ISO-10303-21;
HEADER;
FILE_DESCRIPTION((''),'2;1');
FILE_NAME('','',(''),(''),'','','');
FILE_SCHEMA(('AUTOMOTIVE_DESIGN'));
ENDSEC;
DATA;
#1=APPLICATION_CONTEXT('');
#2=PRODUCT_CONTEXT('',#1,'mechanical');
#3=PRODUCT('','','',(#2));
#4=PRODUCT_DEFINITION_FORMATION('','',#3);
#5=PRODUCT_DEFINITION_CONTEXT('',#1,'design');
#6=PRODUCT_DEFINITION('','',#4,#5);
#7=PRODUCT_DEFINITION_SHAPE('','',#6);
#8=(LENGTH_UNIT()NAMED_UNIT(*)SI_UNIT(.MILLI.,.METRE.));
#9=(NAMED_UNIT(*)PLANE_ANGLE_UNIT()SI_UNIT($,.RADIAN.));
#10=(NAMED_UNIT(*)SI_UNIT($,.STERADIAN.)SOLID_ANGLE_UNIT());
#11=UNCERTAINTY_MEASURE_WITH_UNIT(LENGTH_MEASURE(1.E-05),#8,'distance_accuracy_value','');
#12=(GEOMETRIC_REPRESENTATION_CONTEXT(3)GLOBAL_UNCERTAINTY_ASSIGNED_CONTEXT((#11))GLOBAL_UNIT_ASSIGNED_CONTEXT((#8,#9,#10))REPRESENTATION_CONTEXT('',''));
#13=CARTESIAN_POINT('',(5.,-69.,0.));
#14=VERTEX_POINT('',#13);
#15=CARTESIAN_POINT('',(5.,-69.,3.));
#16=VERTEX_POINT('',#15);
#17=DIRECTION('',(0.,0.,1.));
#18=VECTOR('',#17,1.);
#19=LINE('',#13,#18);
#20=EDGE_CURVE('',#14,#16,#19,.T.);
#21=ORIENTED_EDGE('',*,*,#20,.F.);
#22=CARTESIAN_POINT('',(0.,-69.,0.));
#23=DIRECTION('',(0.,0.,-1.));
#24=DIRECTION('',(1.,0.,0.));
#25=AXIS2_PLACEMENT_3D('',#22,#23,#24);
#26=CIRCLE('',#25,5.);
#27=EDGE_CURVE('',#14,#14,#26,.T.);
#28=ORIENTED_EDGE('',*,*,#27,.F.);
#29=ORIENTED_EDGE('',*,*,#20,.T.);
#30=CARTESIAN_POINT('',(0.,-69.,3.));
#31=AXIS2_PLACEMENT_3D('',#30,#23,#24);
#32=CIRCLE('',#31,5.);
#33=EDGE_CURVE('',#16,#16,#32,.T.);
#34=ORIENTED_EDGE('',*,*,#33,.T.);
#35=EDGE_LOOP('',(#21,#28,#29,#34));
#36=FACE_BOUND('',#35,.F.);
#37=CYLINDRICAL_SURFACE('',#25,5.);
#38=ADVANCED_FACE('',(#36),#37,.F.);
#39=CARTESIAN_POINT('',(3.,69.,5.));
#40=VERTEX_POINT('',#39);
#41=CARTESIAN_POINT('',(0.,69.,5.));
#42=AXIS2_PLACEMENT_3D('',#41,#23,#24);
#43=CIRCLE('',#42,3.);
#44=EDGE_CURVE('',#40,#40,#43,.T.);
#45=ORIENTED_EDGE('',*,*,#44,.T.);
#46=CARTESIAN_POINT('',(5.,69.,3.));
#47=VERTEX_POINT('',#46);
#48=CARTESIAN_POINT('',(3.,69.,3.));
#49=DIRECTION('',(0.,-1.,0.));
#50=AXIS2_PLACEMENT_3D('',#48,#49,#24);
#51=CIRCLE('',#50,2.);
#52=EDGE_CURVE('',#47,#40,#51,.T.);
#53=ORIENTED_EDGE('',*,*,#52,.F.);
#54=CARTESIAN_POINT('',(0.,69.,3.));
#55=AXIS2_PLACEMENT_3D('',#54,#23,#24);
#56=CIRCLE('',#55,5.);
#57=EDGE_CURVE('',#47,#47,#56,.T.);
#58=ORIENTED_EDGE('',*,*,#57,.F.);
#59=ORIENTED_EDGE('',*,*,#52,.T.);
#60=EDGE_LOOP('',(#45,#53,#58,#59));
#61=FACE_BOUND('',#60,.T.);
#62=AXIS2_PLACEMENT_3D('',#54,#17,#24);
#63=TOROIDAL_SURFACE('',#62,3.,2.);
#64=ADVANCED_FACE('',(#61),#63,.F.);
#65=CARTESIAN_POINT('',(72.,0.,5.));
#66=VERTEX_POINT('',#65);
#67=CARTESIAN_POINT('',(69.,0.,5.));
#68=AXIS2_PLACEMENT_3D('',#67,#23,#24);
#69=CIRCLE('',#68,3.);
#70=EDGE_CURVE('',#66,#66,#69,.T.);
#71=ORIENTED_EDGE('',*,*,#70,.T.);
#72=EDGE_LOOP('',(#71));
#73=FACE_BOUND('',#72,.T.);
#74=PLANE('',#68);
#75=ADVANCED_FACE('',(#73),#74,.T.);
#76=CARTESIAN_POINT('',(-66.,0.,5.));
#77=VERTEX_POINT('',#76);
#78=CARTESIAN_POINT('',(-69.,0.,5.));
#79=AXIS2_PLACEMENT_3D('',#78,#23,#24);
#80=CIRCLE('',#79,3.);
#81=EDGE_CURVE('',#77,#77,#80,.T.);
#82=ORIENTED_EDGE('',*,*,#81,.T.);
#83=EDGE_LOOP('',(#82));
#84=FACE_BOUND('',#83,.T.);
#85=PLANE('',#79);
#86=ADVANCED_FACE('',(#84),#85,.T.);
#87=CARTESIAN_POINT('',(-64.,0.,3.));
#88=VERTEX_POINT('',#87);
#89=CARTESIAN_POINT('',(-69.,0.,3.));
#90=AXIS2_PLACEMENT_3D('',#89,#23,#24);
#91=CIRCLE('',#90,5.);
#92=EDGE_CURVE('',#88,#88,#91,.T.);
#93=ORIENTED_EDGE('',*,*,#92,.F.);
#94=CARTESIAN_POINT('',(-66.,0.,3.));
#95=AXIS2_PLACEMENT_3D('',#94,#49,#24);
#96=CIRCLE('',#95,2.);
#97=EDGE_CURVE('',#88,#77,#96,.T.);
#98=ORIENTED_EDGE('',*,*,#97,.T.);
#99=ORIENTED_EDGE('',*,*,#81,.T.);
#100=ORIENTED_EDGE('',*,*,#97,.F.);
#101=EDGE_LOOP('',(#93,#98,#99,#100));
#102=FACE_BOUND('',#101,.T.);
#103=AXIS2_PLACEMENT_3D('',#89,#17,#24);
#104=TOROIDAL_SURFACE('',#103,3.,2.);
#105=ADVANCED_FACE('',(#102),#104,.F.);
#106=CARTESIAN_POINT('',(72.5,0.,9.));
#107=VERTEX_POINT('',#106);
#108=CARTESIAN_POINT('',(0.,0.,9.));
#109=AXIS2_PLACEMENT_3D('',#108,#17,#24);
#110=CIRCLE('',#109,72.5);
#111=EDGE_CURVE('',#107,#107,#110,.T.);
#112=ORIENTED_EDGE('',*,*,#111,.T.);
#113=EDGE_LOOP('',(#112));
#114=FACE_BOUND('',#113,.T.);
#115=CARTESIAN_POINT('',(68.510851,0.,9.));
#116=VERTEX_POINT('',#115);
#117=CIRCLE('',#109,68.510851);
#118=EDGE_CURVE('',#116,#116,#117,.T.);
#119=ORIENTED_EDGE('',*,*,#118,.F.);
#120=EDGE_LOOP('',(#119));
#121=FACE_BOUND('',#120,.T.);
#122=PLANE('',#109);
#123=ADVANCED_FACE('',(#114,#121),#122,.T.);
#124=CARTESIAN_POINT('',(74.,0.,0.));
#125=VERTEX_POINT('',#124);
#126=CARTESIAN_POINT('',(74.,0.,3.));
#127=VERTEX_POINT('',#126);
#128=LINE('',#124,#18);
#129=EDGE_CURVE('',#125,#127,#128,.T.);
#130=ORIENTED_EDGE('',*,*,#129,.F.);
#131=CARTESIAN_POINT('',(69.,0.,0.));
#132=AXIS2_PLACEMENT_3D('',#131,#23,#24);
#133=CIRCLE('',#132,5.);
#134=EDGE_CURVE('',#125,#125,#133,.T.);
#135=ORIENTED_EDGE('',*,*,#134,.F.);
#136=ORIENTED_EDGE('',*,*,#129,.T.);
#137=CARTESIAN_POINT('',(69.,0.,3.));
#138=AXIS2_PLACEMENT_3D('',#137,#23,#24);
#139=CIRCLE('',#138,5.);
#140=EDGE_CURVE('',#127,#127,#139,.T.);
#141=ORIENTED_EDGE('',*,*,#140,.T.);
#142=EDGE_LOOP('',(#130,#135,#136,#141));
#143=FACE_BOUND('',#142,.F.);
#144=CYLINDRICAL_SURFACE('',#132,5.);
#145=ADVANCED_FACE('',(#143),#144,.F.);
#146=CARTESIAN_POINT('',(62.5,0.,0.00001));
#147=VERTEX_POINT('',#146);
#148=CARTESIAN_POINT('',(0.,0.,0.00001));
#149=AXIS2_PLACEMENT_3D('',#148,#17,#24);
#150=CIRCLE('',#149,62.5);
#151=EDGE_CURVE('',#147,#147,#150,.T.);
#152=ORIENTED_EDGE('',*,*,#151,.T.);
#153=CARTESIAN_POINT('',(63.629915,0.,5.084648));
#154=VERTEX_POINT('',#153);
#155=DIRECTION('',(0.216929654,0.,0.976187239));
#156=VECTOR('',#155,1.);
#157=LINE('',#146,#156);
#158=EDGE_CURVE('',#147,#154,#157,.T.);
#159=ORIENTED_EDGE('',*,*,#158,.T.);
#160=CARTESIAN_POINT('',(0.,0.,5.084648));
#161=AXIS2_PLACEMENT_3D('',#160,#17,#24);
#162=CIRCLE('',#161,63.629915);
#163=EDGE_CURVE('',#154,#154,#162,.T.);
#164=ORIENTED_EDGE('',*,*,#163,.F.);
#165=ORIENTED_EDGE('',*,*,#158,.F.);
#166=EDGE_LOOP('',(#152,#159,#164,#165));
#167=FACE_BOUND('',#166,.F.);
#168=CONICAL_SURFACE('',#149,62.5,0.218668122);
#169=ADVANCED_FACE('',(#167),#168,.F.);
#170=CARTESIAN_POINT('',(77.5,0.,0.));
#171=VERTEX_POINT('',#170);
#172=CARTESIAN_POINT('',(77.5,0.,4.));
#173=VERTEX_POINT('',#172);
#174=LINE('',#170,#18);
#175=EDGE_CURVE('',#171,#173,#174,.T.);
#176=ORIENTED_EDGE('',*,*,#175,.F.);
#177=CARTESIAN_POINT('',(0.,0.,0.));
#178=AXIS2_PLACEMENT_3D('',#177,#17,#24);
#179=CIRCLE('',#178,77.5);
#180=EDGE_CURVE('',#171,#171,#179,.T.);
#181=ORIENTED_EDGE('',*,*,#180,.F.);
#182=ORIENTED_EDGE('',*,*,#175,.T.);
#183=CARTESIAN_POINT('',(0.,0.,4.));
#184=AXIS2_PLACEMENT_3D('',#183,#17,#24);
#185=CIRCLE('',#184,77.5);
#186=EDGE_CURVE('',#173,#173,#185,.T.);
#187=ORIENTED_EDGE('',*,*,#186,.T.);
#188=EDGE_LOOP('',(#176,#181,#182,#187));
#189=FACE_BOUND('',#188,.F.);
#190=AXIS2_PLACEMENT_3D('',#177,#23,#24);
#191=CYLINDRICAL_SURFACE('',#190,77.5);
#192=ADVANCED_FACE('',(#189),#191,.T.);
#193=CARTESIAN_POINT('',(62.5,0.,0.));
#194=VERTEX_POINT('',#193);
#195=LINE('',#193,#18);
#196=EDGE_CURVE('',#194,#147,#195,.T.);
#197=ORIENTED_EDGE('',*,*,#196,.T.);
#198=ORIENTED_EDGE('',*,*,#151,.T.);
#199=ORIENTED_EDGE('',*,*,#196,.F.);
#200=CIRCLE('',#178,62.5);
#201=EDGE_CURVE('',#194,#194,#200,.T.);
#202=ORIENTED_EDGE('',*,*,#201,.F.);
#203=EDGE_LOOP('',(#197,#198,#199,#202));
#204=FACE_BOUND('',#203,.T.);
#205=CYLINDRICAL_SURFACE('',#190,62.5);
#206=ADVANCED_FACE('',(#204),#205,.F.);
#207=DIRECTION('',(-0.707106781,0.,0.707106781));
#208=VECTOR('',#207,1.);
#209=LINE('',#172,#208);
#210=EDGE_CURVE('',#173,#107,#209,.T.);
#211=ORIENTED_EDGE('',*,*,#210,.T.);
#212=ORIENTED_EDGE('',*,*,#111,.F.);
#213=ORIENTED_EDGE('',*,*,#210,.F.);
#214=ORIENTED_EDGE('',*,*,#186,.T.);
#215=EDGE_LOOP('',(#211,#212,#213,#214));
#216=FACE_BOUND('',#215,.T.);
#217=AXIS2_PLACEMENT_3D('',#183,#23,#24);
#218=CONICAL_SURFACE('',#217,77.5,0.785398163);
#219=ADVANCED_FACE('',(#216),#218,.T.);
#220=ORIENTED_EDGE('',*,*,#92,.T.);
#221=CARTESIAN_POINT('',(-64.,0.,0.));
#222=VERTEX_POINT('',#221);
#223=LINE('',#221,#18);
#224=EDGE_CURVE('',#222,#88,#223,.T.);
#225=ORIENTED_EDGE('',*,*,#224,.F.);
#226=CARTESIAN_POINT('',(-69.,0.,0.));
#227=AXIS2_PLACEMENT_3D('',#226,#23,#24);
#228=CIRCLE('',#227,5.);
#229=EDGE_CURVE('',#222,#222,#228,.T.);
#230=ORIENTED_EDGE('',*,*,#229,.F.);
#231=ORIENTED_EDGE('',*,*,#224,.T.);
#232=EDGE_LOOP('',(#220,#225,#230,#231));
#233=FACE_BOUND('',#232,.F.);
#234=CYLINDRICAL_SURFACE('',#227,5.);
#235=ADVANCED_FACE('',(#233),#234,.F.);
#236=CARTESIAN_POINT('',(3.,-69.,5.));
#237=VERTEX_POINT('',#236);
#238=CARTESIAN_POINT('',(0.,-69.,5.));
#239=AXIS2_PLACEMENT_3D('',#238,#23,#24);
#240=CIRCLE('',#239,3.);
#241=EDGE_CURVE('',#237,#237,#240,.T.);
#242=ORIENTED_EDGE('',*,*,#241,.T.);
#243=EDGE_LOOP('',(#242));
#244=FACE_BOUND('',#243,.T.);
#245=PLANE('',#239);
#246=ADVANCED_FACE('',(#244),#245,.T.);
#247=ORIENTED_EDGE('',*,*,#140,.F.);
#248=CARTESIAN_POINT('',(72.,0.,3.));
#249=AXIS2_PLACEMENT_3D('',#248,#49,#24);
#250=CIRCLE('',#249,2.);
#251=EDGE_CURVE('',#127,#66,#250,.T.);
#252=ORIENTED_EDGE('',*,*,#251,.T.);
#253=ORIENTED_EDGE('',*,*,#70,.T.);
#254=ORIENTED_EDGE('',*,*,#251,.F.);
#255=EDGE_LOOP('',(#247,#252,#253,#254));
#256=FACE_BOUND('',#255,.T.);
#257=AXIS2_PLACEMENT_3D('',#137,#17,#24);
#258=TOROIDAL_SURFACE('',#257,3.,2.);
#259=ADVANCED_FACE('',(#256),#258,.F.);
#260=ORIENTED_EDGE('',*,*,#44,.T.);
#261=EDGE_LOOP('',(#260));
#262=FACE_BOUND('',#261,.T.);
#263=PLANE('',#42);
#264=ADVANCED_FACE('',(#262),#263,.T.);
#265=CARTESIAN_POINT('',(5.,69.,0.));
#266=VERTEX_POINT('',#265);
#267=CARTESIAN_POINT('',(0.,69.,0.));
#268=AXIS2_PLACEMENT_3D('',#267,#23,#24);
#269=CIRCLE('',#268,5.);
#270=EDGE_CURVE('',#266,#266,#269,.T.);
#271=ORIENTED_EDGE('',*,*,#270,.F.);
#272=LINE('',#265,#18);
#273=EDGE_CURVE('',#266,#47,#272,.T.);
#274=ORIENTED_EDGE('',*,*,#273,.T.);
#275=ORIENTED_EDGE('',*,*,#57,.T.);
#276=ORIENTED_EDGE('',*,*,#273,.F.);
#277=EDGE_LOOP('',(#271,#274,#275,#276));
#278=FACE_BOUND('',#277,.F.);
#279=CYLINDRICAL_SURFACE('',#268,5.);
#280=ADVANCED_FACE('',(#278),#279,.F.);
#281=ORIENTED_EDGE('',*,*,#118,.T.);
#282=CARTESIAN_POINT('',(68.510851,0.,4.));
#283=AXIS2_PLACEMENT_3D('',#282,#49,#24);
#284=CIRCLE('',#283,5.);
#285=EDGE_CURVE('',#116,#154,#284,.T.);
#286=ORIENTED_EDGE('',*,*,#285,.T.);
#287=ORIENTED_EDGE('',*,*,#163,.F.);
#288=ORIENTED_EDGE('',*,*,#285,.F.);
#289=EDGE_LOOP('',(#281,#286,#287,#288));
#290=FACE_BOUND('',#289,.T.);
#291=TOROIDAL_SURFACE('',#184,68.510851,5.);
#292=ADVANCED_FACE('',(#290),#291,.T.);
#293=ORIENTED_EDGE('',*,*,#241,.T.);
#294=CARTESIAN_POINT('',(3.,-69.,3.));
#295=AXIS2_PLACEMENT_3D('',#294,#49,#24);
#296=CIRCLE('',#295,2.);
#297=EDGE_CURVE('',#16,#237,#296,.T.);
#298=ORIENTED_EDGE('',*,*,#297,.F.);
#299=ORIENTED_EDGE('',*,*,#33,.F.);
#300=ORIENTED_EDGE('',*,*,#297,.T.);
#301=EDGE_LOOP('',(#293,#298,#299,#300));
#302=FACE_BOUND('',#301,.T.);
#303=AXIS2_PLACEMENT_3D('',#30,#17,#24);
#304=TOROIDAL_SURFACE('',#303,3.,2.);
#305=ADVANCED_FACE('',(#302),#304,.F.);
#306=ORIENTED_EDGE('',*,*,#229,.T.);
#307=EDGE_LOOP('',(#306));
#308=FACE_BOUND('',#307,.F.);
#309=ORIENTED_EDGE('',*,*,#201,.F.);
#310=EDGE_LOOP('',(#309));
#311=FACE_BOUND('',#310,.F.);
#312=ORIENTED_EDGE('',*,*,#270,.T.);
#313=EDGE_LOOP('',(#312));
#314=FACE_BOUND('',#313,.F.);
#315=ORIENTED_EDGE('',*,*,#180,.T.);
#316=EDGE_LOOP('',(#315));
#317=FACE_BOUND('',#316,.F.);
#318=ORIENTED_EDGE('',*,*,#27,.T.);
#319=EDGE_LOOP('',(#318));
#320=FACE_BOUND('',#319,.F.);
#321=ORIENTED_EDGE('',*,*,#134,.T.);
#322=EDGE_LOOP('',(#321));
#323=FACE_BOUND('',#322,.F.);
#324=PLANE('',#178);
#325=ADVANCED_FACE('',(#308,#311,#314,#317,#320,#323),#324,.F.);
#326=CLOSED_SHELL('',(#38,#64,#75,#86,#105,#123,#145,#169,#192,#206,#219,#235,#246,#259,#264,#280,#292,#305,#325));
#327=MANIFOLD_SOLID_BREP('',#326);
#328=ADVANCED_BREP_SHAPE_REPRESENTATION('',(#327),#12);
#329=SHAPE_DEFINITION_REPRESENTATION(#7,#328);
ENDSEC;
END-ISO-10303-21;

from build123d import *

# Parameters (mm, degrees)
F0_R     = 77.5
F0_R_2   = 62.5
F1_DEPTH = 9
F2_SIZE  = 5
F3_SIZE2 = 1.99999
F3_SIZE  = 8.99999
F4_R     = 5
F5_R     = 5
F6_DEPTH = 5
F7_R     = 2


# Not quite as in the source:
# - a fillet or chamfer is up to 0.001 mm smaller than in the source, because OpenCascade refuses the exact size


with BuildPart() as f1:
    # F0 (on Top) → F1 (new body)
    with BuildSketch(Plane.XY):
        Circle(F0_R)
        Circle(F0_R_2, mode=Mode.SUBTRACT)
    extrude(amount=F1_DEPTH)

    # F2
    f2_edges = [f1.edges().sort_by_distance(p)[0] for p in [
        (-77.5, 0, 9),
    ]]
    chamfer(f2_edges, length=F2_SIZE)

    # F3 (size 9 and 2 in the source; OpenCascade refuses exactly that, so slightly less here)
    f3_edges = [f1.edges().sort_by_distance(p)[0] for p in [
        (-62.5, 0, 9),
    ]]
    f3_side = f1.faces().sort_by_distance((-62.5, 0, 4.5))[0]
    chamfer(f3_edges, length=F3_SIZE, length2=F3_SIZE2, reference=f3_side)

    # F4
    f4_edges = [f1.edges().sort_by_distance(p)[0] for p in [
        (-64.49999, 0, 9),
    ]]
    fillet(f4_edges, radius=F4_R)

    # F5 (on face) → F6 (cut)
    with BuildSketch(Plane(origin=(0, 0, 0), x_dir=(1, 0, 0), z_dir=(0, 0, -1))):
        with Locations((0, 69)):
            Circle(F5_R)
        with Locations((-69, 0)):
            Circle(F5_R)
        with Locations((0, -69)):
            Circle(F5_R)
        with Locations((69, 0)):
            Circle(F5_R)
    extrude(amount=-F6_DEPTH, mode=Mode.SUBTRACT)

    # F7
    f7_edges = [f1.edges().sort_by_distance(p)[0] for p in [
        (-5, -69, 5),
        (-74, 0, 5),
        (64, 0, 5),
        (-5, 69, 5),
    ]]
    fillet(f7_edges, radius=F7_R)


solid = f1.part
